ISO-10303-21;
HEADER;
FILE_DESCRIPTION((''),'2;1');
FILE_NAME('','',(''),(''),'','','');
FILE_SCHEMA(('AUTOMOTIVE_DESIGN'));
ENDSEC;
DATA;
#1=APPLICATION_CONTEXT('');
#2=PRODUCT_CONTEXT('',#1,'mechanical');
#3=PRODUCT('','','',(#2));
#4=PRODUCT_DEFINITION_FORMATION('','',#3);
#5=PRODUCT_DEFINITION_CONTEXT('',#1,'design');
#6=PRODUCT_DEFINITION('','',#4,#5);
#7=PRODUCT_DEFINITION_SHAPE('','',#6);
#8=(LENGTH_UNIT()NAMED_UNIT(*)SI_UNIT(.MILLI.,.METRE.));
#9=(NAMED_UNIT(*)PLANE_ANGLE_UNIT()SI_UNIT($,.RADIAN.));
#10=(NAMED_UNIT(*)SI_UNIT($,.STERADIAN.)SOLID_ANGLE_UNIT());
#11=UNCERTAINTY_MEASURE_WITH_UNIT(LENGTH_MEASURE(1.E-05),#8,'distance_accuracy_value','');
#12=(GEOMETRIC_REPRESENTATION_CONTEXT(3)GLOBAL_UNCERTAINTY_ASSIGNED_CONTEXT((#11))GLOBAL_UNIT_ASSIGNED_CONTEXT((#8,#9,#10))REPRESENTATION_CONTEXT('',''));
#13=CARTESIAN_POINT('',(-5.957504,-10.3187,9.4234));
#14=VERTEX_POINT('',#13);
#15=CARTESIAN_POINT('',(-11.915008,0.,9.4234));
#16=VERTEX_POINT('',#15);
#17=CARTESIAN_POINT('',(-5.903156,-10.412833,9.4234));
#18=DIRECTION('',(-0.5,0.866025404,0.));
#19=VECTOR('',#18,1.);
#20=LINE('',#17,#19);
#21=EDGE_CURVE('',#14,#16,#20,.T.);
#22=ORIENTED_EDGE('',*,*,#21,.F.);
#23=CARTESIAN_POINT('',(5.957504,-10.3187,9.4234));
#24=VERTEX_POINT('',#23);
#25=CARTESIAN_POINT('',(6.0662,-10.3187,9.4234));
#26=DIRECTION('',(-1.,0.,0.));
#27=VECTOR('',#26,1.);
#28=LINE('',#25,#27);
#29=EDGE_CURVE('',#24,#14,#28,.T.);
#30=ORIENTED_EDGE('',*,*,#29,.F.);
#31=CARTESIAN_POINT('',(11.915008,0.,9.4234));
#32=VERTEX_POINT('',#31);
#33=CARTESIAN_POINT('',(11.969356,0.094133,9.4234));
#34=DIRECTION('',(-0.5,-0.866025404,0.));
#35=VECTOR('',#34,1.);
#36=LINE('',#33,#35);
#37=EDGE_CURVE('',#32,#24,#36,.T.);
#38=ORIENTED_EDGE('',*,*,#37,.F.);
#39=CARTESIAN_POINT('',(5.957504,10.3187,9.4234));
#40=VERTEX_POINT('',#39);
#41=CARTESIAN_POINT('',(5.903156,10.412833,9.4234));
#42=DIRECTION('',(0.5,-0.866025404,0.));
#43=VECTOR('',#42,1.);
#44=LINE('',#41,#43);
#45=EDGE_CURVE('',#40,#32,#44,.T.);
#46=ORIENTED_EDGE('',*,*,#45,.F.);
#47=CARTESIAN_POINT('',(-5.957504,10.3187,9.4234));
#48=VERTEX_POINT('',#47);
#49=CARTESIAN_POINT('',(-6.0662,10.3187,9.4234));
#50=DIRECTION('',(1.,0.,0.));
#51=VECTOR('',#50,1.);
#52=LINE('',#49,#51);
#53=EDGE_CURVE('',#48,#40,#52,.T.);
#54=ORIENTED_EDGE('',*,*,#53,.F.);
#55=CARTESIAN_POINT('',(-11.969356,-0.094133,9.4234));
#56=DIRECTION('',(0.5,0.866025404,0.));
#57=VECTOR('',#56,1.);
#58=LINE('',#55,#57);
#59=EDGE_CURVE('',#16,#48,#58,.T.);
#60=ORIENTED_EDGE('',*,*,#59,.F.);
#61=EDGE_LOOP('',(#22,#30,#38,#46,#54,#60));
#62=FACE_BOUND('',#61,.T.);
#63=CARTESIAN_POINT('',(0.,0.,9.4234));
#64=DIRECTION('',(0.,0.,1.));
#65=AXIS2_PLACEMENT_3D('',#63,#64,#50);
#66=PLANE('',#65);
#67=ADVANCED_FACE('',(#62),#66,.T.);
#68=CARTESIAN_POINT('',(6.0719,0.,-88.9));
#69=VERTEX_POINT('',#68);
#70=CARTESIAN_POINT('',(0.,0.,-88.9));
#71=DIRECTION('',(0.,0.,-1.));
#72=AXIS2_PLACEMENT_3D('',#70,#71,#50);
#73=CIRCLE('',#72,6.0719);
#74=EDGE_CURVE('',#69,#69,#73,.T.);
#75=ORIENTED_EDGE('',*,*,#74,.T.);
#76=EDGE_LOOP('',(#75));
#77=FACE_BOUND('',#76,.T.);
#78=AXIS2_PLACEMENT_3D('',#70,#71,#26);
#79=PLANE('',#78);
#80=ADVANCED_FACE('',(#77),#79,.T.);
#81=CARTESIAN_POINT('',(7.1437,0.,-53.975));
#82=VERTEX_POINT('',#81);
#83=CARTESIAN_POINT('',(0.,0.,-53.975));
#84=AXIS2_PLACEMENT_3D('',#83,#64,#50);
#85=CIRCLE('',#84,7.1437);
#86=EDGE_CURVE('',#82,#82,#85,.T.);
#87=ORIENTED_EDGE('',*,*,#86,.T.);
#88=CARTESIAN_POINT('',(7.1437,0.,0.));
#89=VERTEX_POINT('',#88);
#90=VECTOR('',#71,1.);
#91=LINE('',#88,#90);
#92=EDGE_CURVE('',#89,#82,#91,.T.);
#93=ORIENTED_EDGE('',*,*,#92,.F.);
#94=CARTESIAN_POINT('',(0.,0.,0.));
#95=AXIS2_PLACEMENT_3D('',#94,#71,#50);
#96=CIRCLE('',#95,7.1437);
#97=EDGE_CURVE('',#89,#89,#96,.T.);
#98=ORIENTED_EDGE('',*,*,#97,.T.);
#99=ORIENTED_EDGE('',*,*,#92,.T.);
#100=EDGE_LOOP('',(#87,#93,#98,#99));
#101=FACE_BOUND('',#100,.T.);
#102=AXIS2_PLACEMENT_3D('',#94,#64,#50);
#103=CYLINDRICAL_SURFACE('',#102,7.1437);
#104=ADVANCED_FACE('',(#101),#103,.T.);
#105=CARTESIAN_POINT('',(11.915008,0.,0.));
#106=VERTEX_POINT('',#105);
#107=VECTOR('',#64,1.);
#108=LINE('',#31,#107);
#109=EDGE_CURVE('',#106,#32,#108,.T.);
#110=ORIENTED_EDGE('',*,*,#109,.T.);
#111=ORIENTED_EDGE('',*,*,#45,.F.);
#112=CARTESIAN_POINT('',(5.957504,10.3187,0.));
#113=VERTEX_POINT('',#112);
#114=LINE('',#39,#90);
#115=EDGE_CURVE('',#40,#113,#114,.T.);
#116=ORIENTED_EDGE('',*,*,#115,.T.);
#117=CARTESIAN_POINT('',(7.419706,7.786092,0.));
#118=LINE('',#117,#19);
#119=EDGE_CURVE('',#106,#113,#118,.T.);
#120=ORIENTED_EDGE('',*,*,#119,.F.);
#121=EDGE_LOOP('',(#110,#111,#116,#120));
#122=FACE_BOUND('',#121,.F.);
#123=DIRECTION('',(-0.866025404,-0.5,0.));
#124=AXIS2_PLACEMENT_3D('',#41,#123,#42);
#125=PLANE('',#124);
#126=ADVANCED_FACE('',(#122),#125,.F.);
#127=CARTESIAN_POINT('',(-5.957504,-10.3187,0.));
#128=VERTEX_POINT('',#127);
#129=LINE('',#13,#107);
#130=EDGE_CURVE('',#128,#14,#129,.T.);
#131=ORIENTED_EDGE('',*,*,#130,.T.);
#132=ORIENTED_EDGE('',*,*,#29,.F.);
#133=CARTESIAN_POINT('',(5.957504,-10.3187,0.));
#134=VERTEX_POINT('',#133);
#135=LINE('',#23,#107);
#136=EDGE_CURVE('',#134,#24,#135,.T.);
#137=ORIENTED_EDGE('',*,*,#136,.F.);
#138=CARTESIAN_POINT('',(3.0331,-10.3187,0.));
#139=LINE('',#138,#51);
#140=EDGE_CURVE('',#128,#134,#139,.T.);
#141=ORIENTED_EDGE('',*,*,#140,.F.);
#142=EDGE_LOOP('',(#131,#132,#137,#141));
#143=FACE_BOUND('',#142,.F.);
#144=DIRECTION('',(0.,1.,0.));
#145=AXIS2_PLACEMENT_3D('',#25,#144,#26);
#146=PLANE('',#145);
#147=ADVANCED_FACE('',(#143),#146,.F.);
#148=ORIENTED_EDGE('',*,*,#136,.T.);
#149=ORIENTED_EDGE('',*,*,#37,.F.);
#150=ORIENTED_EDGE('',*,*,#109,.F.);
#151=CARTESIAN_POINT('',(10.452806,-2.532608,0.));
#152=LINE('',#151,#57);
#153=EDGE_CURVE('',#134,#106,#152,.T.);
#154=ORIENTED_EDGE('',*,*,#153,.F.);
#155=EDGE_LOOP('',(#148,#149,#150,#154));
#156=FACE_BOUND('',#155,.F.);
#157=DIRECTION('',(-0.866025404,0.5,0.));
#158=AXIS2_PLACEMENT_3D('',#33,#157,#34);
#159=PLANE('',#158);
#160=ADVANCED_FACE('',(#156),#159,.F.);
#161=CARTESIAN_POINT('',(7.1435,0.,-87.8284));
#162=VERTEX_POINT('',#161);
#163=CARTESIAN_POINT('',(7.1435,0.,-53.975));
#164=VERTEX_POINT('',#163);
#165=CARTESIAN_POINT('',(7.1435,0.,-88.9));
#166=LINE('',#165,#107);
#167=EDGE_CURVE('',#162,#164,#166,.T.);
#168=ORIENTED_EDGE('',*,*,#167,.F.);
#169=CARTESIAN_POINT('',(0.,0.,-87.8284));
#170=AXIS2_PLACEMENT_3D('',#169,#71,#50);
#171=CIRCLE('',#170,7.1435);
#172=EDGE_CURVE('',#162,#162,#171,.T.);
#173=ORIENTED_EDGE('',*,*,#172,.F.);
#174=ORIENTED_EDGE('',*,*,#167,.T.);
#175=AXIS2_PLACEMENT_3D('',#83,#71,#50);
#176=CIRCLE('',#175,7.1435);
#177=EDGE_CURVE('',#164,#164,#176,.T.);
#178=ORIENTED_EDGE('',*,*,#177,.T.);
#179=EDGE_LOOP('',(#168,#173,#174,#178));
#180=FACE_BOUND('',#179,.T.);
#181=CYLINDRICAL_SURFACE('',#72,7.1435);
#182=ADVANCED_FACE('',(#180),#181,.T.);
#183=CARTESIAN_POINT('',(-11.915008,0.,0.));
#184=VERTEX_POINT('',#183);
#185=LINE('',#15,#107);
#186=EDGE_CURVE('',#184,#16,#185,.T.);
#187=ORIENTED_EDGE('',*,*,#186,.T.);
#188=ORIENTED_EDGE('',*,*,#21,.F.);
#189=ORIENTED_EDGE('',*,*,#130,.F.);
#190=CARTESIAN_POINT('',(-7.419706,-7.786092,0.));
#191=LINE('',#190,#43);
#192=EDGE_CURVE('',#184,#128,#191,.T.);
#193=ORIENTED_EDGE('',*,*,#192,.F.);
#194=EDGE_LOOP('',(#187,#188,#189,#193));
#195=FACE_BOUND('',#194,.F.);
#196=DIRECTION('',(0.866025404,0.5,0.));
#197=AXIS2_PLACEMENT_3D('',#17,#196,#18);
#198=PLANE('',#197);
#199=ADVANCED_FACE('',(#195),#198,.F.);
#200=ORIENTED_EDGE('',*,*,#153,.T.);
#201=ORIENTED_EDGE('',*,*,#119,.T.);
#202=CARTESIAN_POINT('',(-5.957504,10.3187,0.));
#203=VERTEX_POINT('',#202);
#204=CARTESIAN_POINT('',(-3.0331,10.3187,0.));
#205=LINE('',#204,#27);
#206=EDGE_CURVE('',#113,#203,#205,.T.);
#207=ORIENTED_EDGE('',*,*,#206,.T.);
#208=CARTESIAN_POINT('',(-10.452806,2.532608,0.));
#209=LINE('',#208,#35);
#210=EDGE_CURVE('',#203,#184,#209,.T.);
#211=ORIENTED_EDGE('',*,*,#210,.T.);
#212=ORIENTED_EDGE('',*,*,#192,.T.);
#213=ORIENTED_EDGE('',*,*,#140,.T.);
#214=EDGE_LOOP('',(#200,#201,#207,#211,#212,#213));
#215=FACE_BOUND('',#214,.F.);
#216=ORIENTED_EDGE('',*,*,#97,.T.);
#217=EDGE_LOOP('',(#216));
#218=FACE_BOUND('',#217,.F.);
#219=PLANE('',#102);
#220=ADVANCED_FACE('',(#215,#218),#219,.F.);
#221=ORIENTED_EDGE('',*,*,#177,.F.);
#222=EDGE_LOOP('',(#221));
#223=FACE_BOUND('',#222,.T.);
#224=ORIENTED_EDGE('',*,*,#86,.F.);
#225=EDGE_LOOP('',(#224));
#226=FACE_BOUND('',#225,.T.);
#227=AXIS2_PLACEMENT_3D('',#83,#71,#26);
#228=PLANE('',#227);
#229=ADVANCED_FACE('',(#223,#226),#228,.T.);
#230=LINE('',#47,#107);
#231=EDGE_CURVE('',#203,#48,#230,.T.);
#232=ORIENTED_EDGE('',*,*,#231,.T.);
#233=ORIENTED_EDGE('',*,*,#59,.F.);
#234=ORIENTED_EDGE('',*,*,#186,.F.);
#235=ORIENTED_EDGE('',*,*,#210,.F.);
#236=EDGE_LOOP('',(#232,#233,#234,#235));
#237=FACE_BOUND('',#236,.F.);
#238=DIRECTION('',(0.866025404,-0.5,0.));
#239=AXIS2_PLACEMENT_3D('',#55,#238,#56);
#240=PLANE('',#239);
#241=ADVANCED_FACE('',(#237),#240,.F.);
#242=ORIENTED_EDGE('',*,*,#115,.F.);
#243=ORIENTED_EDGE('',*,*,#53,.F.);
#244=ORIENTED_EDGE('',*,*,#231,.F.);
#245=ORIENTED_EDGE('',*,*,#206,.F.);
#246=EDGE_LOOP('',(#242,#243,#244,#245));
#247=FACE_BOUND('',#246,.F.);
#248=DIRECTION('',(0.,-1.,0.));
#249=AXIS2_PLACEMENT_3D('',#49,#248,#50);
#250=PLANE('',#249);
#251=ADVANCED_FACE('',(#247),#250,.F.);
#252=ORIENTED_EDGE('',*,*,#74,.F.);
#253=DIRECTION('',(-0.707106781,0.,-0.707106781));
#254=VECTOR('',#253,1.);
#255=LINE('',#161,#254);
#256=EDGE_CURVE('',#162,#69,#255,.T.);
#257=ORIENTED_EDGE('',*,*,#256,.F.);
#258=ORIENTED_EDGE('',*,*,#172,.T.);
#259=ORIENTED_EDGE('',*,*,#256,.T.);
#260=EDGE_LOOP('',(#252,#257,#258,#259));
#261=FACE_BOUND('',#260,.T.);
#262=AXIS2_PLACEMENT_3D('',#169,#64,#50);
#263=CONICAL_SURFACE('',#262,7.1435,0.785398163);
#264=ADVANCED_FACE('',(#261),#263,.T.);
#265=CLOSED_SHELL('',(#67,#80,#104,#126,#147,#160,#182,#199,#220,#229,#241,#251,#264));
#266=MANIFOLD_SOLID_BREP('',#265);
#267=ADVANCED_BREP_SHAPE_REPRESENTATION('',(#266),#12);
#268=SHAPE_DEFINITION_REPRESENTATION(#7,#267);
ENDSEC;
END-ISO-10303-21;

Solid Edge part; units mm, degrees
sketch "Sketch1" plane through (0, 0, 0) normal (0, 0, 1) x (1, 0, 0)
  circle A0 centre (0, 0) radius 11.9697
  dimension "D1" = 23.9395
extrude "Protrusion1" add sketch "Sketch1" along normal blind 9.4234
sketch "Sketch2" plane through (0, 0, 0) normal (0, 0, -1) x (1, 0, 0)
  circle A0 centre (0, 0) radius 7.1437
extrude "Protrusion2" add sketch "Sketch2" along normal blind 88.9
sketch "Sketch3" plane through (0, 0, -88.9) normal (0, 0, -1) x (1, 0, 0)
  circle A0 centre (0, 0) radius 7.1435
extrude "Cutout1" cut sketch "Sketch3" against normal blind 34.925 flip side to cut
chamfer "Chamfer_1" distance 1.0716 angle 45 1 edges at (-7.1435, 0, -88.9)
sketch "Sketch4" plane through (0, 0, 9.4234) normal (0, 0, 1) x (1, 0, 0)
  line L0 (-6.0662, 10.3187) -> (6.0662, 10.3187)
  dimension "D1" = 20.6375
extrude "Cutout2" cut sketch "Sketch4" against normal up to next material side at (0, 10.3687, 9.4234)
pattern_circular "Pattern1" count 6 over 360 about axis through (0, 0, 9.4234) along (0, 0, 1) of "Cutout2"
properties part number "24101175"
